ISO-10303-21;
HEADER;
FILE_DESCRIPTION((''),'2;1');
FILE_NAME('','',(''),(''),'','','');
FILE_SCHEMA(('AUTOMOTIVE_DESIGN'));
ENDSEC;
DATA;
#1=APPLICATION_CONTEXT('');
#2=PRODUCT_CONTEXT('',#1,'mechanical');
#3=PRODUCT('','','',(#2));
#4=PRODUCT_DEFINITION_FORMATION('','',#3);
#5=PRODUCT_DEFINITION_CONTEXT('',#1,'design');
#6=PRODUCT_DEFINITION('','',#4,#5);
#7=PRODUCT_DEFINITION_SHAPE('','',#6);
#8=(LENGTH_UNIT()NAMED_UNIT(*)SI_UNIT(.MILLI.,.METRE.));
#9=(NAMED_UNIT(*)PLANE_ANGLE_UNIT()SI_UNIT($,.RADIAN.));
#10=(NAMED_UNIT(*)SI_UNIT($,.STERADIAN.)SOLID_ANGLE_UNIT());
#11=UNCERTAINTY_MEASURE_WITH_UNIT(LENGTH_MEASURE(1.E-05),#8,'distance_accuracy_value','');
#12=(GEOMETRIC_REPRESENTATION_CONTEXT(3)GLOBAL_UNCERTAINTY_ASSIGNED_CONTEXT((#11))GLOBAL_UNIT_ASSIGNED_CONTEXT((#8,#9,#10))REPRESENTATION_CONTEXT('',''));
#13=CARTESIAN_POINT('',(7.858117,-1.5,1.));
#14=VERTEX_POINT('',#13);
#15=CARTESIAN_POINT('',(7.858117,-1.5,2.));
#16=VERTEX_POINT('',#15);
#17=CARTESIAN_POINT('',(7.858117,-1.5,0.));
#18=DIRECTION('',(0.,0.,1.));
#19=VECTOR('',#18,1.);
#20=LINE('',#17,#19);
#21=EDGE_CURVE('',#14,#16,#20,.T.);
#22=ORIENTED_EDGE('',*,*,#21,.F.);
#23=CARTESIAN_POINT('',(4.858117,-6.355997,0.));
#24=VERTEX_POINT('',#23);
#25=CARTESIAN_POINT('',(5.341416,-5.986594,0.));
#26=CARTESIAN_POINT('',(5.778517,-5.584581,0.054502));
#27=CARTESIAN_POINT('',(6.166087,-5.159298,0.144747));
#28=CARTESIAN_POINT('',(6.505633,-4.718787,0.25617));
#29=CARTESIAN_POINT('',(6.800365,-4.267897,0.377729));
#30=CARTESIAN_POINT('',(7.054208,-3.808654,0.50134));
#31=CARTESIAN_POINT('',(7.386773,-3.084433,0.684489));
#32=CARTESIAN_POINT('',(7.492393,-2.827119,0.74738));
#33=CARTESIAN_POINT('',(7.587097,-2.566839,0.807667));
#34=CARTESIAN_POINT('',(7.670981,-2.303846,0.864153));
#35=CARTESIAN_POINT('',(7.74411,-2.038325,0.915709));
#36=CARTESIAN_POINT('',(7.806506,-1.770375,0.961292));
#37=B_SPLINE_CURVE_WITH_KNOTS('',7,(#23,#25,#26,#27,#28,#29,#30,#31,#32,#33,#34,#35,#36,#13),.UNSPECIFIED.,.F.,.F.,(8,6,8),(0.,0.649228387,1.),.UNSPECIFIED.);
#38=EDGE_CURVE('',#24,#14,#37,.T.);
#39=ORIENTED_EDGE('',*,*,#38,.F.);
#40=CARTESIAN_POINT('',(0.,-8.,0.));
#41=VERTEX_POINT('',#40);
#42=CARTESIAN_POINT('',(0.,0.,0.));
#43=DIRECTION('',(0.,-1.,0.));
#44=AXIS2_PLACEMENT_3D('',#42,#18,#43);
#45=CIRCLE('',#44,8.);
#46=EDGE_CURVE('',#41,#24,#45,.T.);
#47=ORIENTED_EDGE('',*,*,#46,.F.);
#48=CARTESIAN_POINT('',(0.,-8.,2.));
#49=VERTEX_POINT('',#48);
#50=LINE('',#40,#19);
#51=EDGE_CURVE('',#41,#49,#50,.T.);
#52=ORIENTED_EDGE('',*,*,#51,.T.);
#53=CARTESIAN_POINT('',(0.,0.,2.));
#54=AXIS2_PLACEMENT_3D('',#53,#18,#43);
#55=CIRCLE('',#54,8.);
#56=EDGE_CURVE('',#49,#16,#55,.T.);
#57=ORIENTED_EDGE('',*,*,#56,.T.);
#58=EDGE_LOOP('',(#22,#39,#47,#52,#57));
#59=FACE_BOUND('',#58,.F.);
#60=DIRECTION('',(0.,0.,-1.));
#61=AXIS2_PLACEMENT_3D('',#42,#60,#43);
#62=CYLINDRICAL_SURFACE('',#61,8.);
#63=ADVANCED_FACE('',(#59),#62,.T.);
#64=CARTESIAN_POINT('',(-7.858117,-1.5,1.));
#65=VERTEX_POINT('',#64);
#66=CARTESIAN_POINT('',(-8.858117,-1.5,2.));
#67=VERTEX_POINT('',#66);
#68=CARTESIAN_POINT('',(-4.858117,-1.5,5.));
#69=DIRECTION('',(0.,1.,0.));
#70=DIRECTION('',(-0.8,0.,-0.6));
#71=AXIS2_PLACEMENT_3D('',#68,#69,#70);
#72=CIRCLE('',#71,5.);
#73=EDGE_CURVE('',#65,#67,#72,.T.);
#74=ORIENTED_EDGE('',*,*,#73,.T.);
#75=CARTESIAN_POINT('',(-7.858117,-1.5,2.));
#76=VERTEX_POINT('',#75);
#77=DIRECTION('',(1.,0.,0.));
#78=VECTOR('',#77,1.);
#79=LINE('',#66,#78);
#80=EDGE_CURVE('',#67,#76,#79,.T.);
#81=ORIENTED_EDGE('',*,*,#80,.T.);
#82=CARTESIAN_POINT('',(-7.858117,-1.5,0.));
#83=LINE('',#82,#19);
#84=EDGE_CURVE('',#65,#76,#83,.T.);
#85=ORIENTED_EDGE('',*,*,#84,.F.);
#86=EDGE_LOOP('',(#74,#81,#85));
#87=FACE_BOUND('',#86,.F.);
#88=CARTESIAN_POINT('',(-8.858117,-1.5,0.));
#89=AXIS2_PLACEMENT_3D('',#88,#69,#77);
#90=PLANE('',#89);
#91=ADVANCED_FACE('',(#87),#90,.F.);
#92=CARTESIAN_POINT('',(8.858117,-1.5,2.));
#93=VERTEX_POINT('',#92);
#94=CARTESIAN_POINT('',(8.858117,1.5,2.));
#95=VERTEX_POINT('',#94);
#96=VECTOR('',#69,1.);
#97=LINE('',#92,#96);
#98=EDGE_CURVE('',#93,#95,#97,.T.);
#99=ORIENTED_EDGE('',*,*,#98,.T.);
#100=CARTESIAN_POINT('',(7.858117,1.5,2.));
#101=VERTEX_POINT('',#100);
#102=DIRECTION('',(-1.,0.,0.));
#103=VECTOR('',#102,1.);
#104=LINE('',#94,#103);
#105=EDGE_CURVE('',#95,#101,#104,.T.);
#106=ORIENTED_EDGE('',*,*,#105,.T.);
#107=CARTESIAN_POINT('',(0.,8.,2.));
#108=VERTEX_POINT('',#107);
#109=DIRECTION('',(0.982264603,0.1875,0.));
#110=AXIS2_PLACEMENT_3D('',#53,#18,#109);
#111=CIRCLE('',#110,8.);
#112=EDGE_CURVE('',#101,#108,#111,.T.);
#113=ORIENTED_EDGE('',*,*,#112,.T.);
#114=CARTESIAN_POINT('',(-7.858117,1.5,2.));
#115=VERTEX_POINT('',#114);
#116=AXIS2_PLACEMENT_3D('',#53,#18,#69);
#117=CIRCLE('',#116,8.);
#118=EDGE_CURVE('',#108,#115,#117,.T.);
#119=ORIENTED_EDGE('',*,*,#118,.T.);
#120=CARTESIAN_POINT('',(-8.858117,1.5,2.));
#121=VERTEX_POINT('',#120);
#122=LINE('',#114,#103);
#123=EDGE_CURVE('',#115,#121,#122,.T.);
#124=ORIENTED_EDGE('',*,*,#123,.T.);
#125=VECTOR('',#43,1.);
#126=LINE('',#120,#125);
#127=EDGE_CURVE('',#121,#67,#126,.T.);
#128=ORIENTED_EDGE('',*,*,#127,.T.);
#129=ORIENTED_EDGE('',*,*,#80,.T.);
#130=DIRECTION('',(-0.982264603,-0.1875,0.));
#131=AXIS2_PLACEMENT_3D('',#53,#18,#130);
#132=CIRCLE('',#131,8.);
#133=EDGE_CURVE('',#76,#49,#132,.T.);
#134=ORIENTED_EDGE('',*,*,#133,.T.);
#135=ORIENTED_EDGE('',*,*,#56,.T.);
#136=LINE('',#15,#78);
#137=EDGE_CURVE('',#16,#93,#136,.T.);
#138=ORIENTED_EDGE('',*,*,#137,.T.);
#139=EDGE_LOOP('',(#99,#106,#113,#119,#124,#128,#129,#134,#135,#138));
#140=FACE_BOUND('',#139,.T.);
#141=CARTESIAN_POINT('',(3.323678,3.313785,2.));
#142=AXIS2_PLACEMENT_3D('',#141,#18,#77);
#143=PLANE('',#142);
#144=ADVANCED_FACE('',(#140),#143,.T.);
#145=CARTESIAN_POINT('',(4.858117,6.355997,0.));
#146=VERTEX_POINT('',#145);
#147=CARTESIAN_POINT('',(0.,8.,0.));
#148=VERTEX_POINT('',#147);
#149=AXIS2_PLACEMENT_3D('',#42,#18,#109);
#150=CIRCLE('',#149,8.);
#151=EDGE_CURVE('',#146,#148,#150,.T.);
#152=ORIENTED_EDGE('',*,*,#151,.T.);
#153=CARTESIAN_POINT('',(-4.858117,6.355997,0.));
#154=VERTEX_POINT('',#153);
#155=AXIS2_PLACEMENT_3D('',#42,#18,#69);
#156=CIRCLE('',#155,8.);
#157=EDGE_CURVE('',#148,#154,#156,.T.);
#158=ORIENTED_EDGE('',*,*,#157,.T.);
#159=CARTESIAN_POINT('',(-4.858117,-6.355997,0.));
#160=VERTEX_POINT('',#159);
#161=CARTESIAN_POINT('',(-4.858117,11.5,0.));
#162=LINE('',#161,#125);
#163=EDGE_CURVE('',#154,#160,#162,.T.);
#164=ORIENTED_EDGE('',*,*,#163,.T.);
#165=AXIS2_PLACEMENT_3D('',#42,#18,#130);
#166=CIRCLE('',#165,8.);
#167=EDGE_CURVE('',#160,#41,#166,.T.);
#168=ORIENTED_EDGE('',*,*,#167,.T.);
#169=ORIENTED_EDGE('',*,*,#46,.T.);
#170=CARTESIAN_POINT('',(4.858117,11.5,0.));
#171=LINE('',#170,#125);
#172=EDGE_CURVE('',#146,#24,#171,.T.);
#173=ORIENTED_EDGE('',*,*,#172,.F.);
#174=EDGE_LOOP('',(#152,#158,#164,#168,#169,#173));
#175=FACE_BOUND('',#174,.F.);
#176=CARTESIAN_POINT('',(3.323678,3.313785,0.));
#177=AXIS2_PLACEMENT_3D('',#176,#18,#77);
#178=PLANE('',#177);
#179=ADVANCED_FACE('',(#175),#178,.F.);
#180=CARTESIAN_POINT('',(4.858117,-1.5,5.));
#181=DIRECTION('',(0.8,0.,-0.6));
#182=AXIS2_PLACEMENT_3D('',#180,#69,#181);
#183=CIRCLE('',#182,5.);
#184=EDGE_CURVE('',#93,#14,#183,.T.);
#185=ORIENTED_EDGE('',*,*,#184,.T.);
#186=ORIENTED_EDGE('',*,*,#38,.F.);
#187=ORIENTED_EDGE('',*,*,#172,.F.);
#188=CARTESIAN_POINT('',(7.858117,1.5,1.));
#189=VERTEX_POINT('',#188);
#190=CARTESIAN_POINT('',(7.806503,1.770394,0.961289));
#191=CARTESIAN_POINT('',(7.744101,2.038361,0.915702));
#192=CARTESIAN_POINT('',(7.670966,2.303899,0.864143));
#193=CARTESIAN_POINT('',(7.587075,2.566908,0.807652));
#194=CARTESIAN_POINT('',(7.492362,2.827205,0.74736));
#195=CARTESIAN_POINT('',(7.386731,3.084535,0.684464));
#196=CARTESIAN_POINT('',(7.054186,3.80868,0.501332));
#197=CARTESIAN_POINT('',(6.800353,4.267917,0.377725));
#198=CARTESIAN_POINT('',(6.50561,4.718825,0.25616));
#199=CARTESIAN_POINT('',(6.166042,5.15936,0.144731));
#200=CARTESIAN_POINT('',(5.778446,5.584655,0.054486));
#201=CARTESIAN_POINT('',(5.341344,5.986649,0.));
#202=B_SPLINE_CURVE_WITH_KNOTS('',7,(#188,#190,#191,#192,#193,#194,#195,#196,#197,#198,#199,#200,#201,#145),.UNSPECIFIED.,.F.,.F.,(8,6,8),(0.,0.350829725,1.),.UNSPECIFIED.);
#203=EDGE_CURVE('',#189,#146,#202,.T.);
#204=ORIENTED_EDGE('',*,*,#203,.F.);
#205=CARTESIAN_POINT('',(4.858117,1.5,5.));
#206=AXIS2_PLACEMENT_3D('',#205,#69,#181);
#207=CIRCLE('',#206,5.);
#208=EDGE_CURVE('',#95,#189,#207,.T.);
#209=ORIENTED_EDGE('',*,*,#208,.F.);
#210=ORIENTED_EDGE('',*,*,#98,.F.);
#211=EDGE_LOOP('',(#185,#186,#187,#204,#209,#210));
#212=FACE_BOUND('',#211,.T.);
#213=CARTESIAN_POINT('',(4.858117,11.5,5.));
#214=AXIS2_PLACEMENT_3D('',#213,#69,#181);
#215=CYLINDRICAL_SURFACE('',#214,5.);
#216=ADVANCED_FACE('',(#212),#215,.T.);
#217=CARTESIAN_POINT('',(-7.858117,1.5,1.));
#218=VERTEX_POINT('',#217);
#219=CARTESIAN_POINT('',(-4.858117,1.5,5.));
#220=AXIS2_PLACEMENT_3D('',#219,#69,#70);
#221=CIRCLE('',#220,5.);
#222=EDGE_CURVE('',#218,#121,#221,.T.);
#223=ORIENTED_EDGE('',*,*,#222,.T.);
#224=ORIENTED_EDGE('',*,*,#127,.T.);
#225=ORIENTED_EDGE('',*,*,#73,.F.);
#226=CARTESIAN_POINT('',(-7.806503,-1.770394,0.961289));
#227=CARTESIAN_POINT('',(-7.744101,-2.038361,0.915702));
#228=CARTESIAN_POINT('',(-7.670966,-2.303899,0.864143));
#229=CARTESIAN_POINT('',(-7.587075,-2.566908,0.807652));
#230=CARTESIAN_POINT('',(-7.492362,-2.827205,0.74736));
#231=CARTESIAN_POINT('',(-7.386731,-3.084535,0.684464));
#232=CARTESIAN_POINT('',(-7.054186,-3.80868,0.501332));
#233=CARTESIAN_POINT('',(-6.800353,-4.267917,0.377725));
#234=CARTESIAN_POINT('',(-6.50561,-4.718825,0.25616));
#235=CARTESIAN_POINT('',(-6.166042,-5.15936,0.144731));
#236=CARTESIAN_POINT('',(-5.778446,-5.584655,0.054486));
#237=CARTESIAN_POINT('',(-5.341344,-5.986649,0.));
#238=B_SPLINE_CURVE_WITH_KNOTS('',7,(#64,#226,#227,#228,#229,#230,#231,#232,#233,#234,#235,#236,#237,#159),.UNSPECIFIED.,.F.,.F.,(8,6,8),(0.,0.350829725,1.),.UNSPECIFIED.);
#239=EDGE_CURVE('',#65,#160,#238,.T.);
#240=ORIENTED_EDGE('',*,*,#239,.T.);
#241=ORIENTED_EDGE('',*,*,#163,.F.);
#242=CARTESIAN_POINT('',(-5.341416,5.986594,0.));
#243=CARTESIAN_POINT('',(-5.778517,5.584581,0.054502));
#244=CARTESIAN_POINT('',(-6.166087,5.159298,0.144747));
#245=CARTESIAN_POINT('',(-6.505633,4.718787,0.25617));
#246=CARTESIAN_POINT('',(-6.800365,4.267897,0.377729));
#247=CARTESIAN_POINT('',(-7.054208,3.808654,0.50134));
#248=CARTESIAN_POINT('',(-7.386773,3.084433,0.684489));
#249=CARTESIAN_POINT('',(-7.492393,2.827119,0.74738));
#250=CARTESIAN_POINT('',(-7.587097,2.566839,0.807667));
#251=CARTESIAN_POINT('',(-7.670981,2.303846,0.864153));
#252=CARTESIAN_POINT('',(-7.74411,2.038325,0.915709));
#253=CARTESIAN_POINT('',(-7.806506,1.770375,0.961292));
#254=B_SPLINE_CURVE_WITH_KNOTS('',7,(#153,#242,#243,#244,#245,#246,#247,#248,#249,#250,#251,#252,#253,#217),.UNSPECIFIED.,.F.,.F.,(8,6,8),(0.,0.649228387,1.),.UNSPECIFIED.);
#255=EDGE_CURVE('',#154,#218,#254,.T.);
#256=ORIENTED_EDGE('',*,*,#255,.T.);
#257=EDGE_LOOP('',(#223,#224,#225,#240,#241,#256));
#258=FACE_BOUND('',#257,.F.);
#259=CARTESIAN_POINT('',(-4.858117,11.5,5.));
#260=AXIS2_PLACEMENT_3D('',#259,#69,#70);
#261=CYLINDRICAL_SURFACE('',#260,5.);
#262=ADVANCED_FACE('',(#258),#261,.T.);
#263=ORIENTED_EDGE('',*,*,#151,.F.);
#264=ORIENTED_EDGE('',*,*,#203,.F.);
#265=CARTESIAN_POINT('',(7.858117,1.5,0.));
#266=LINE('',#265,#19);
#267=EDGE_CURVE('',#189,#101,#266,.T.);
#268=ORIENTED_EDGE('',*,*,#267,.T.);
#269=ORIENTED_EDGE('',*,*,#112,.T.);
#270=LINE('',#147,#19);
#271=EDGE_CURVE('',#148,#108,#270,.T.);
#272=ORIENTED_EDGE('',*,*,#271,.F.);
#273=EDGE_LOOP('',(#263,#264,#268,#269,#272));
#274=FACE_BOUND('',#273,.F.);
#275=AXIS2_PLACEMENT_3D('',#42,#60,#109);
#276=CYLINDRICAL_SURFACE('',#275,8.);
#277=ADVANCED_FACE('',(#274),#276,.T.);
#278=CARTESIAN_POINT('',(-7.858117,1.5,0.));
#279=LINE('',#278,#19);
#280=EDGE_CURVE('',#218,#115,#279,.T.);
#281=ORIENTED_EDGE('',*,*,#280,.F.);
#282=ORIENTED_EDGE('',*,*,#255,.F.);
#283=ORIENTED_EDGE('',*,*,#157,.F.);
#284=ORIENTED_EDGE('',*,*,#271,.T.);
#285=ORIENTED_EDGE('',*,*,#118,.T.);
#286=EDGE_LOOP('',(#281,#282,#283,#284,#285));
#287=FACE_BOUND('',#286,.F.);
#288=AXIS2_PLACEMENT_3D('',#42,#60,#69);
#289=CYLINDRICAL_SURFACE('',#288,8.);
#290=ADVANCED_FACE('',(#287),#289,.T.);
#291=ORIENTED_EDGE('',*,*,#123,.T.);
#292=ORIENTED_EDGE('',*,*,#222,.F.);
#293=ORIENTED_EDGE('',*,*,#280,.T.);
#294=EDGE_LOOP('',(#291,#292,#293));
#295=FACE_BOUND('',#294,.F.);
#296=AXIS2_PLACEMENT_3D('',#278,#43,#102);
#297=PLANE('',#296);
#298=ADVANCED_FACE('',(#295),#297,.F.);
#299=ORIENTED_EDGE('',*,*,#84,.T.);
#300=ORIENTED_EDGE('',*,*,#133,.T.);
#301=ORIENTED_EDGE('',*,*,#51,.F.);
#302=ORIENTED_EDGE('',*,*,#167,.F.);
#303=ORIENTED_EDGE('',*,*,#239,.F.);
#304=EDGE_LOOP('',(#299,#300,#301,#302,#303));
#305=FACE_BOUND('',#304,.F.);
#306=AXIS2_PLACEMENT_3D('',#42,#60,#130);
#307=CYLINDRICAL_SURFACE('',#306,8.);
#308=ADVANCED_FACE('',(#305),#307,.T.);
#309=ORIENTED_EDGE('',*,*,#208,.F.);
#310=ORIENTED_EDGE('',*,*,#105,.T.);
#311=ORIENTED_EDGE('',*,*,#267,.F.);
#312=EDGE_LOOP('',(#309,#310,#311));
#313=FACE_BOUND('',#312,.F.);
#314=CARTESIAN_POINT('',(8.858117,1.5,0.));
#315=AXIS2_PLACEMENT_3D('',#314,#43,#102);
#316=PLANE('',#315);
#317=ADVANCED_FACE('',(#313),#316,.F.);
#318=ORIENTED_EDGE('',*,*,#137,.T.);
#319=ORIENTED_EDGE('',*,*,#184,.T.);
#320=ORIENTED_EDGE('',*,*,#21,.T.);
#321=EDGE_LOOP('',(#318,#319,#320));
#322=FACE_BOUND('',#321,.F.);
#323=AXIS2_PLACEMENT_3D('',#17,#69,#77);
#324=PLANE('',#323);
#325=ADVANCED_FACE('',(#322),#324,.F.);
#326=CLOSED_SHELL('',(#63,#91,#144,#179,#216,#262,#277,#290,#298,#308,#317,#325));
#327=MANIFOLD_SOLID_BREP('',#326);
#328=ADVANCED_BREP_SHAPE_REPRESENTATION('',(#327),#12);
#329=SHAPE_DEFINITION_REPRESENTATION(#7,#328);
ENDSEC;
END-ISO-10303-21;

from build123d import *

# Parameters (mm, degrees)
F1_DEPTH    = 2
F2_T1_DEPTH = 23


# Not quite as in the source:
# - a fillet or chamfer that OpenCascade refuses, or shapes differently, is made with other operations: its cross-section is extruded or revolved along the edge and cut away or added


with BuildPart() as f1:
    # F0 (on Top) → F1 (new body)
    with BuildSketch(Plane.XY):
        with BuildLine():
            Line((0, 0), (8, 0))
            ThreePointArc((8, 0), (7.964450219, 0.7533476681), (7.8581168228, 1.5))
            ThreePointArc((7.8581168228, 1.5), (5.0990195136, 6.164414003), (0, 8))
            Line((0, 8), (0, 0))
        make_face()
        with BuildLine():
            Line((8.8581168228, 0), (8, 0))
            ThreePointArc((8, 0), (7.964450219, -0.7533476681), (7.8581168228, -1.5))
            Line((7.8581168228, -1.5), (8.8581168228, -1.5))
            Line((8.8581168228, -1.5), (8.8581168228, 0))
        make_face()
        with BuildLine():
            ThreePointArc((7.8581168228, 1.5), (7.964450219, 0.7533476681), (8, 0))
            Line((8, 0), (8.8581168228, 0))
            Line((8.8581168228, 0), (8.8581168228, 1.5))
            Line((8.8581168228, 1.5), (7.8581168228, 1.5))
        make_face()
        with BuildLine():
            ThreePointArc((7.8581168228, -1.5), (7.964450219, -0.7533476681), (8, 0))
            Line((8, 0), (0, 0))
            Line((0, 0), (0, -8))
            ThreePointArc((0, -8), (5.0990195136, -6.164414003), (7.8581168228, -1.5))
        make_face()
        with BuildLine():
            Line((-8, 0), (0, 0))
            Line((0, 0), (0, 8))
            ThreePointArc((0, 8), (-5.0990195136, 6.164414003), (-7.8581168228, 1.5))
            ThreePointArc((-7.8581168228, 1.5), (-7.964450219, 0.7533476681), (-8, 0))
        make_face()
        with BuildLine():
            Line((0, -8), (0, 0))
            Line((0, 0), (-8, 0))
            ThreePointArc((-8, 0), (-7.964450219, -0.7533476681), (-7.8581168228, -1.5))
            ThreePointArc((-7.8581168228, -1.5), (-5.0990195136, -6.164414003), (0, -8))
        make_face()
        with BuildLine():
            Line((-8.8581168228, 0), (-8, 0))
            ThreePointArc((-8, 0), (-7.964450219, 0.7533476681), (-7.8581168228, 1.5))
            Line((-7.8581168228, 1.5), (-8.8581168228, 1.5))
            Line((-8.8581168228, 1.5), (-8.8581168228, 0))
        make_face()
        with BuildLine():
            ThreePointArc((-7.8581168228, -1.5), (-7.964450219, -0.7533476681), (-8, 0))
            Line((-8, 0), (-8.8581168228, 0))
            Line((-8.8581168228, 0), (-8.8581168228, -1.5))
            Line((-8.8581168228, -1.5), (-7.8581168228, -1.5))
        make_face()
    extrude(amount=F1_DEPTH)

    # F2: fillet of radius 5 on 2 edges, made by hand

    # F2_s2 → F2_t1 (cut)
    with BuildSketch(Plane.XZ.offset(-11.5)):
        with BuildLine():
            ThreePointArc((-8.8581168228, 2), (-7.0941848003, 0.527864045), (-4.8581168228, 0))
            Line((-4.8581168228, 0), (-8.8581168228, 0))
            Line((-8.8581168228, 0), (-8.8581168228, 2))
        make_face()
        with BuildLine():
            ThreePointArc((8.8581168228, 2), (7.0941848003, 0.527864045), (4.8581168228, 0))
            Line((4.8581168228, 0), (8.8581168228, 0))
            Line((8.8581168228, 0), (8.8581168228, 2))
        make_face()
    extrude(amount=F2_T1_DEPTH, mode=Mode.SUBTRACT)


solid = f1.part
